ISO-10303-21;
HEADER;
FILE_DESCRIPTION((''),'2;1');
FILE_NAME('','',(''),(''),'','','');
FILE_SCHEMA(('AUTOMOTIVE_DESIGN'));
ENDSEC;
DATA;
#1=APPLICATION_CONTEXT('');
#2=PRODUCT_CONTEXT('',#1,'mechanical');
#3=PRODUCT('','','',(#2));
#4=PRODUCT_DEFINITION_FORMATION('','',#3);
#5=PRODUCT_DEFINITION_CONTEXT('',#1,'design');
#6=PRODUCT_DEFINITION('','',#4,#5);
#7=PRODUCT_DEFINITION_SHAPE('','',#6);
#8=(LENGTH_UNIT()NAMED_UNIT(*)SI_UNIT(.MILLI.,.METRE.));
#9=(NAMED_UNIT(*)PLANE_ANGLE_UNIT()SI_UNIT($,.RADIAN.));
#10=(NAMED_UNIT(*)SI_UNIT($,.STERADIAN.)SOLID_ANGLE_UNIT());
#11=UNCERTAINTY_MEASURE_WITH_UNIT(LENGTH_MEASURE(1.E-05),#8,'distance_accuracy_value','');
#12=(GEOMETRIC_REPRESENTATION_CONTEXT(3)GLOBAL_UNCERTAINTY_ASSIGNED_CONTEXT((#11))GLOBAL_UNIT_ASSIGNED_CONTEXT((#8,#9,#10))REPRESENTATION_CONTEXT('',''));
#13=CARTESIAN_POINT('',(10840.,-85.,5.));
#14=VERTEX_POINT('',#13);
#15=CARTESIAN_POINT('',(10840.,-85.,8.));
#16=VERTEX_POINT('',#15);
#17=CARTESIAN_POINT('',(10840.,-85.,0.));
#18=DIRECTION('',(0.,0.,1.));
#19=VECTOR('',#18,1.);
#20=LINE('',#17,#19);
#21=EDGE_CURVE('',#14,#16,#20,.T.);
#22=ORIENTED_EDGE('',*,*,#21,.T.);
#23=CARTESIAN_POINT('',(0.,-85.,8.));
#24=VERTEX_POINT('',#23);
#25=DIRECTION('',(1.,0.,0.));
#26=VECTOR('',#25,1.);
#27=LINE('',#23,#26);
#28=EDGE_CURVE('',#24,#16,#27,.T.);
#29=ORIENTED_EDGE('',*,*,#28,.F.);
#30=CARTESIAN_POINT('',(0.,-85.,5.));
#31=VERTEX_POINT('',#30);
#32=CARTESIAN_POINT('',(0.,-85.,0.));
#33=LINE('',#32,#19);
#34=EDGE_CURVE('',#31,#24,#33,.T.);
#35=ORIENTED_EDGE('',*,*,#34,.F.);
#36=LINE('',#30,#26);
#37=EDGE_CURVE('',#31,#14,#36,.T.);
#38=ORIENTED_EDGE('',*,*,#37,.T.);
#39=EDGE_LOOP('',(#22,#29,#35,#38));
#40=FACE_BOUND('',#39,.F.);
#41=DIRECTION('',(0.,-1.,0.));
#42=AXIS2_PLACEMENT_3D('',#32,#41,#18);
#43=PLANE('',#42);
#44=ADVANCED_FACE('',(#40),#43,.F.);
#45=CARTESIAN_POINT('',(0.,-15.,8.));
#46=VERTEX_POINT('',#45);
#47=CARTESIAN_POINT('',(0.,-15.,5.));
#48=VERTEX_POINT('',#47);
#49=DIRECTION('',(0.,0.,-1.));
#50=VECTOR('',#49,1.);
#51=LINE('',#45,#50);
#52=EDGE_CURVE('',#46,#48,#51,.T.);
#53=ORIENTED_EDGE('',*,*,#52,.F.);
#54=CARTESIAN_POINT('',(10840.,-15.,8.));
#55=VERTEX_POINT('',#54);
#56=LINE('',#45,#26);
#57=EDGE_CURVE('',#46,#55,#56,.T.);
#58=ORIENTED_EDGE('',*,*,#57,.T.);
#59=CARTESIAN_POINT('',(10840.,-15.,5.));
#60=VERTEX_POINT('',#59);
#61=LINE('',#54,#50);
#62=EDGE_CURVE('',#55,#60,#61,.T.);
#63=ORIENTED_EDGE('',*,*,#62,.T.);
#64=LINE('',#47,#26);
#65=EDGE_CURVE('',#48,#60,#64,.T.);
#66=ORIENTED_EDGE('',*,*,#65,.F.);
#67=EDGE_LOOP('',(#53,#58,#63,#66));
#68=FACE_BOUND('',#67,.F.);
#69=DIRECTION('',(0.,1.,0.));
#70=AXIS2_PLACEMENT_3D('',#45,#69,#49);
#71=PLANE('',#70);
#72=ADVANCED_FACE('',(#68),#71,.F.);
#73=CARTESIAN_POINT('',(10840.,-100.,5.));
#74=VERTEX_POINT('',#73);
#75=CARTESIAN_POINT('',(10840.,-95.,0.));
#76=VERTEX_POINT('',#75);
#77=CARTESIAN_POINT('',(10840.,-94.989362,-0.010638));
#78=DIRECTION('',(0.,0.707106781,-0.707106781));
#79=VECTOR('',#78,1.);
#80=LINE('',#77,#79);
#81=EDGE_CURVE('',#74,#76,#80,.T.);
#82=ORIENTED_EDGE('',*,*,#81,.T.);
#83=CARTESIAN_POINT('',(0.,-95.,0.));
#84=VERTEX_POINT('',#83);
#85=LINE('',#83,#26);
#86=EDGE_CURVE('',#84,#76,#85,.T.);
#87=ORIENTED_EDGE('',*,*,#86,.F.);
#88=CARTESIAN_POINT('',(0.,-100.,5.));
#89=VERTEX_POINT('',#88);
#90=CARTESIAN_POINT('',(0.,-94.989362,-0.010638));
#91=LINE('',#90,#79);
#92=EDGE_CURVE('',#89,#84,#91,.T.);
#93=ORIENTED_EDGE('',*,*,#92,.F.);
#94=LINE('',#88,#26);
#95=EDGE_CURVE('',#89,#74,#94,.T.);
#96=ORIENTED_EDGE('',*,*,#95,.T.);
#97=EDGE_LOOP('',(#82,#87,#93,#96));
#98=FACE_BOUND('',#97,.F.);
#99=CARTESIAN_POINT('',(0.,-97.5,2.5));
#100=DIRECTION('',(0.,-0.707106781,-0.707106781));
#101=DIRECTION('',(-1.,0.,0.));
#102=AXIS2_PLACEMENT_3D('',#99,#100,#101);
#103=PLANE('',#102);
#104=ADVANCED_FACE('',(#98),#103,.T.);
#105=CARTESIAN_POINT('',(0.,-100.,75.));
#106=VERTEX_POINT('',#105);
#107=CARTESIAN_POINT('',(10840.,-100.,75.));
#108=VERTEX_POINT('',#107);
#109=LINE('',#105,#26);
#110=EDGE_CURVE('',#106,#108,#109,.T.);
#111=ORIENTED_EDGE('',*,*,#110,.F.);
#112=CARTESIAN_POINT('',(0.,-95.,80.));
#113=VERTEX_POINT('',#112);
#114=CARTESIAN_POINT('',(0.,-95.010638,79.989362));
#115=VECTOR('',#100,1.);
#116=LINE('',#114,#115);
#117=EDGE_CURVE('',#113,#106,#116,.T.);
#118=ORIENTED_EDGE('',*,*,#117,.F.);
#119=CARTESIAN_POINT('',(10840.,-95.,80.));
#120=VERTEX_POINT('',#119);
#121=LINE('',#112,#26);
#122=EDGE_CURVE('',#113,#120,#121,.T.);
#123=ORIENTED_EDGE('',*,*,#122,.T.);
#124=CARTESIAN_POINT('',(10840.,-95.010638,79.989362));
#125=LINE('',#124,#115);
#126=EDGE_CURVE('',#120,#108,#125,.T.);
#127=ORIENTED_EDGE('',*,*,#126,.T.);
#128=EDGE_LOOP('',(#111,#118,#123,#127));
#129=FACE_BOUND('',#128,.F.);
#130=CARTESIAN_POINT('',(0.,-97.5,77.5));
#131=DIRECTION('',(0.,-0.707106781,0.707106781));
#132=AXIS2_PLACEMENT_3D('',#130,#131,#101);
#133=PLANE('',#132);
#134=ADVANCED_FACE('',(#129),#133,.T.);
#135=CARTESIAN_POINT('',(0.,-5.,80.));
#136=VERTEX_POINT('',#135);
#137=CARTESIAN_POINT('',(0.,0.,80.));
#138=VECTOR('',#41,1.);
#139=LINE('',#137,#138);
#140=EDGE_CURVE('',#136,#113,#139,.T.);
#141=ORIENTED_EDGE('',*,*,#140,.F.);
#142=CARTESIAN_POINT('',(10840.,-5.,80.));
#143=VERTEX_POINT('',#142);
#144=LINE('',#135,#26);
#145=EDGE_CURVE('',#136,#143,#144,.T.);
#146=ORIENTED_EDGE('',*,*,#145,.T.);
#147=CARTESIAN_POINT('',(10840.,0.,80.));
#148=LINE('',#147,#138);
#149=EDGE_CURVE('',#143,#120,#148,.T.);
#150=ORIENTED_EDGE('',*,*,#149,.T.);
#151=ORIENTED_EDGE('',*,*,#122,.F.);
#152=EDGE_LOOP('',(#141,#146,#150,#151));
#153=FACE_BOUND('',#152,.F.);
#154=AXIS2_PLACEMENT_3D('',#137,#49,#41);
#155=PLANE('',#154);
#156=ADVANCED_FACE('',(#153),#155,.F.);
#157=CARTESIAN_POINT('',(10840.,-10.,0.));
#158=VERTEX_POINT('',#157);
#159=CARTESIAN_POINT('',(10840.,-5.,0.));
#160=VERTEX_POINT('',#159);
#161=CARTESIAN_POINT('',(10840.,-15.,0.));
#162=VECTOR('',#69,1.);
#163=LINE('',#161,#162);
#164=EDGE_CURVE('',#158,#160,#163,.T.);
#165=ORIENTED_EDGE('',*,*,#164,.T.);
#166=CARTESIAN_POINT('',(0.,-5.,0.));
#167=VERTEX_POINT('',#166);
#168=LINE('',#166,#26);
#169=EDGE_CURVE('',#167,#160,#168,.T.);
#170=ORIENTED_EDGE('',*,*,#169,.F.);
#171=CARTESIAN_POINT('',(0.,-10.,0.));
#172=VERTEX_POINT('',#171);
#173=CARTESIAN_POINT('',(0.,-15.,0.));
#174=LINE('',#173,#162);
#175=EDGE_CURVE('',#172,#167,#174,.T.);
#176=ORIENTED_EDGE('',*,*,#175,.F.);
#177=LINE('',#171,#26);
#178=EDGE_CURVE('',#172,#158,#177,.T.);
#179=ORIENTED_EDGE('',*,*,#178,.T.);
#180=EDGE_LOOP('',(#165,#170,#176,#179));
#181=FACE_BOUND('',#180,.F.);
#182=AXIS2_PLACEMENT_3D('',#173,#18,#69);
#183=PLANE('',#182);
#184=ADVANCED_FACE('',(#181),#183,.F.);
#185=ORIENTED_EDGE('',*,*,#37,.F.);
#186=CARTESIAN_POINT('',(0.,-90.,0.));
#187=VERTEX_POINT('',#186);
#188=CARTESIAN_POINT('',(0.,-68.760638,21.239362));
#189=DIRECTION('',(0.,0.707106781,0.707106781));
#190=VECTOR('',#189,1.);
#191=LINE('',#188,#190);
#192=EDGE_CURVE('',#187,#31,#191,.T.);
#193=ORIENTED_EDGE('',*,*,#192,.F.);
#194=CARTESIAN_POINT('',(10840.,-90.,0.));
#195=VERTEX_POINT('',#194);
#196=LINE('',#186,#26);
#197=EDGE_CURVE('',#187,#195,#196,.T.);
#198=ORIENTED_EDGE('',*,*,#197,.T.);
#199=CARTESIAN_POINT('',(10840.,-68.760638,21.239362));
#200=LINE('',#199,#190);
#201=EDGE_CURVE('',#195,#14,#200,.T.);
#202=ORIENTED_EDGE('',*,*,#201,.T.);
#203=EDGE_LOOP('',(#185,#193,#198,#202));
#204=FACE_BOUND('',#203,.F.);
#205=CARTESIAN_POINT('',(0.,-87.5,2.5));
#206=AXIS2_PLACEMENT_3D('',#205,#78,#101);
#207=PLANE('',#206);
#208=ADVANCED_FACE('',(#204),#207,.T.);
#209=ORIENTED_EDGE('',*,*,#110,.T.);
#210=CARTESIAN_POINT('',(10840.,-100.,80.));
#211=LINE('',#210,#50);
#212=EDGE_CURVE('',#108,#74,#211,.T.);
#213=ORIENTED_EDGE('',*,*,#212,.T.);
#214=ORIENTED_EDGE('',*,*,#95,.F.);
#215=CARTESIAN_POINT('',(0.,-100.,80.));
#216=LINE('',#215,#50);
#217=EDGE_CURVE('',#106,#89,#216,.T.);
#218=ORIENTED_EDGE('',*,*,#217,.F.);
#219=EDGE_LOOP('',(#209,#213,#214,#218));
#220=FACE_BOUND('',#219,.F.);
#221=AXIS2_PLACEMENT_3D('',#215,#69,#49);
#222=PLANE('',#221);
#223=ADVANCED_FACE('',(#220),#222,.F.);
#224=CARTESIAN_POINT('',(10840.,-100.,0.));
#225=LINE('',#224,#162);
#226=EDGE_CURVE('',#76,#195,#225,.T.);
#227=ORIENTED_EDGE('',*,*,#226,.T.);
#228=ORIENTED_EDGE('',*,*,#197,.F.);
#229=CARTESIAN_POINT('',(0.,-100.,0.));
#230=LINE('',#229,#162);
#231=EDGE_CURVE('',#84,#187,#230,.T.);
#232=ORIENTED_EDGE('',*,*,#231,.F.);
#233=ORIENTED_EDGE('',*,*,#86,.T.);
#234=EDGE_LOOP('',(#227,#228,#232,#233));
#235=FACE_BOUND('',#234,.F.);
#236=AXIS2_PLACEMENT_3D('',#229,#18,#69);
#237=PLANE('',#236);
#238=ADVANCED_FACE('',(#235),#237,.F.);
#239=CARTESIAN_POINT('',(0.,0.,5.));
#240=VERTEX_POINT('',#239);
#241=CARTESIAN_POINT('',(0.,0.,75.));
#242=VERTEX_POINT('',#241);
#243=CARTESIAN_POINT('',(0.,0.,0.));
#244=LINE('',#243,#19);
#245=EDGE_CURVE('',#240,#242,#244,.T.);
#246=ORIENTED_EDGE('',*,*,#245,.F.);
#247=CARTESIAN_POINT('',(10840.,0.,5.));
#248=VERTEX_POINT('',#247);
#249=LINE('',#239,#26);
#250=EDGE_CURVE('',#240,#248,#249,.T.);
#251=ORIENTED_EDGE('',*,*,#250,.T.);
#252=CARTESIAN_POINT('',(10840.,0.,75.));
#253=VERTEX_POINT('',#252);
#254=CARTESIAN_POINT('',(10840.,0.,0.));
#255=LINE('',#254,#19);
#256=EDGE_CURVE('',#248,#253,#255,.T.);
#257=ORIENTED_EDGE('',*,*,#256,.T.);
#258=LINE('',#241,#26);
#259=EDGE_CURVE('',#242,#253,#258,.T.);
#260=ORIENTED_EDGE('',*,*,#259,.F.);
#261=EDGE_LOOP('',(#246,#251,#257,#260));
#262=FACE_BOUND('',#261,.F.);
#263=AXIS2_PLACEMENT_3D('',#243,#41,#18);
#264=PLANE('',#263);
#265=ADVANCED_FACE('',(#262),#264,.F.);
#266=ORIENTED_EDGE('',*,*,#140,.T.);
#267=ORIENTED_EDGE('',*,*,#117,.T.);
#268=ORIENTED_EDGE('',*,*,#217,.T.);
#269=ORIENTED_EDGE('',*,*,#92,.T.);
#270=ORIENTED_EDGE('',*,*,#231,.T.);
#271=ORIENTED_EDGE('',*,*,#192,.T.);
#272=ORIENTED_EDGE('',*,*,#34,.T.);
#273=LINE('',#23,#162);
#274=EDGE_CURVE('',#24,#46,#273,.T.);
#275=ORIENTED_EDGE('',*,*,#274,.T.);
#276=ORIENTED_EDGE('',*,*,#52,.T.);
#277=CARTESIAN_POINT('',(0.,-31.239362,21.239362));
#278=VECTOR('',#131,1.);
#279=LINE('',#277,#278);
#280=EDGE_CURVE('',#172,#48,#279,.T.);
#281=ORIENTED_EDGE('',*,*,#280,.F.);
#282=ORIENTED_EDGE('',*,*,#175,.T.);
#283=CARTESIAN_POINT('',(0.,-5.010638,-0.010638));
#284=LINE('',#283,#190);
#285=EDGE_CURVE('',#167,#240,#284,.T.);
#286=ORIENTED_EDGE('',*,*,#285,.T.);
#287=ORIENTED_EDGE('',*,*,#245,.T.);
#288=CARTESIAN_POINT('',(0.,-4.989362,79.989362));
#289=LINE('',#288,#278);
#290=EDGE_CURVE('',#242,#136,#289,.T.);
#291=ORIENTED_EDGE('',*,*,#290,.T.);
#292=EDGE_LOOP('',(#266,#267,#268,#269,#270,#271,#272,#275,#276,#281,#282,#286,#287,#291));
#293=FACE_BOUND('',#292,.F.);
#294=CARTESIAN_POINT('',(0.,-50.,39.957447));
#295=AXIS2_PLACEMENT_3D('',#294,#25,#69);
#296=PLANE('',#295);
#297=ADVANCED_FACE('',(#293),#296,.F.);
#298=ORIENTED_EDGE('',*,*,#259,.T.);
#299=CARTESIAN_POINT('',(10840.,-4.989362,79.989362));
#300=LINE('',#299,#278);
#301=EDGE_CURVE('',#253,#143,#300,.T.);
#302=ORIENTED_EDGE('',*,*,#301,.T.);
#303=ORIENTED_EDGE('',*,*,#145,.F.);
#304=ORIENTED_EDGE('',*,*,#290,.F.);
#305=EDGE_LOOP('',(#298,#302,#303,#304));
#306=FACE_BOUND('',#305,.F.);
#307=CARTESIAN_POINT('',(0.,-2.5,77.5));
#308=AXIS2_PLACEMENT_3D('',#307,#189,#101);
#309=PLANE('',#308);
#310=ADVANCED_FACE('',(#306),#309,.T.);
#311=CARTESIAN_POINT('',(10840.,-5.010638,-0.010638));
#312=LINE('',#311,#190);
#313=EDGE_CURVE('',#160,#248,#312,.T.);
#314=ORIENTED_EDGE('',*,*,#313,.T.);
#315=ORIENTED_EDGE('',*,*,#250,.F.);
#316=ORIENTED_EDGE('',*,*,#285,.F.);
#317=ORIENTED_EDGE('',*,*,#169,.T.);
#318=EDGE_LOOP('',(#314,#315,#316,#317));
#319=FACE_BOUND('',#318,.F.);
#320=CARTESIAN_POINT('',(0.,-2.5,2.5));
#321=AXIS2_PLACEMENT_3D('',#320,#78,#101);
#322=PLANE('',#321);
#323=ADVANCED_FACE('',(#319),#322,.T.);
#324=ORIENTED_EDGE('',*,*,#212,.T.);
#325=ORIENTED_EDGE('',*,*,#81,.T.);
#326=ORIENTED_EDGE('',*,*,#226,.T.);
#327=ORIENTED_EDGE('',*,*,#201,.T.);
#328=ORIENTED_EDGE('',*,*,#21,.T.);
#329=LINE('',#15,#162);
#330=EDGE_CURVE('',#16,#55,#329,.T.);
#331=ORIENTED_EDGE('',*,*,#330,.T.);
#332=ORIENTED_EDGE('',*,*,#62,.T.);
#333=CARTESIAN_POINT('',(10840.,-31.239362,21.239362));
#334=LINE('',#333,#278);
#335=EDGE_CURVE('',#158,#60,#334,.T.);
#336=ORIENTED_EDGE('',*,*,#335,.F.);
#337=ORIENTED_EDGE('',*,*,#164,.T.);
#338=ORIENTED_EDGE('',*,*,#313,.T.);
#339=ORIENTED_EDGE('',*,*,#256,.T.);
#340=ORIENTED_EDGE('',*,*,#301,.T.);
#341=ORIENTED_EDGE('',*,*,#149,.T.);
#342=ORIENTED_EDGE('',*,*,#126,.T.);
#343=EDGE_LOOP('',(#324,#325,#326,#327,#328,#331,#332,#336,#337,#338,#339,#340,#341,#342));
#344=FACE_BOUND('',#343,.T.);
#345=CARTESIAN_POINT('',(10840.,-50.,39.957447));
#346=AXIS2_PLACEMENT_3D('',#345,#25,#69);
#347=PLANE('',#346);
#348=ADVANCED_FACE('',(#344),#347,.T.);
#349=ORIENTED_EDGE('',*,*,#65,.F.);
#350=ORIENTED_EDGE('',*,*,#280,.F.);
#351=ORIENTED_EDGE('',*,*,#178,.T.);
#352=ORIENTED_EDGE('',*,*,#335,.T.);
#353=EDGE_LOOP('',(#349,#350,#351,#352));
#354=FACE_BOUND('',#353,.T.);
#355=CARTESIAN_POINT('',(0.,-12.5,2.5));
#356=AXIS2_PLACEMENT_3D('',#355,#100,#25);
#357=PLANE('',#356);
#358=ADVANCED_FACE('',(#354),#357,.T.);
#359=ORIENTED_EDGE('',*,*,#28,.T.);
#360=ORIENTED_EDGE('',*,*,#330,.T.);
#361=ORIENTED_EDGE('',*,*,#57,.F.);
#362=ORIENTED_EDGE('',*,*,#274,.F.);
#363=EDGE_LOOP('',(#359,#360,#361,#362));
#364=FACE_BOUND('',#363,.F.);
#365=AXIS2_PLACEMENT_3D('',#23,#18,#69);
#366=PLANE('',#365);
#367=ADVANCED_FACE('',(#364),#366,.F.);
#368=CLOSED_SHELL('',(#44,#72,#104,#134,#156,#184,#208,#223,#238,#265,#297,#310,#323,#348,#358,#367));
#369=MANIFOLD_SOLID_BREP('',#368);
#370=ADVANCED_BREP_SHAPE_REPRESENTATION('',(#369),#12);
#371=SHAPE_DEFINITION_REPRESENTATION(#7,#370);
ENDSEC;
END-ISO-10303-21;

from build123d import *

# Parameters (mm, degrees)
F1_DEPTH = 10840
F2_SIZE  = 5


# Not quite as in the source:
# - a feature names something its author has since deleted; it is built from what else it names


with BuildPart() as f1:
    # F0 (on Right) → F1 (new body)
    with BuildSketch(Plane.YZ):
        Polygon((-15, 0), (0, 0), (0, 80), (-100, 80), (-100, 0), (-85, 0), (-85, 8), (-15, 8), align=None)
    extrude(amount=F1_DEPTH)

    # F2
    f2_edges = [f1.edges().sort_by_distance(p)[0] for p in [
        (5420, -100, 0),
        (5420, -100, 80),
        (5420, 0, 80),
        (5420, 0, 0),
        (5420, -15, 0),
        (5420, -85, 0),
    ]]
    chamfer(f2_edges, length=F2_SIZE)


solid = f1.part
